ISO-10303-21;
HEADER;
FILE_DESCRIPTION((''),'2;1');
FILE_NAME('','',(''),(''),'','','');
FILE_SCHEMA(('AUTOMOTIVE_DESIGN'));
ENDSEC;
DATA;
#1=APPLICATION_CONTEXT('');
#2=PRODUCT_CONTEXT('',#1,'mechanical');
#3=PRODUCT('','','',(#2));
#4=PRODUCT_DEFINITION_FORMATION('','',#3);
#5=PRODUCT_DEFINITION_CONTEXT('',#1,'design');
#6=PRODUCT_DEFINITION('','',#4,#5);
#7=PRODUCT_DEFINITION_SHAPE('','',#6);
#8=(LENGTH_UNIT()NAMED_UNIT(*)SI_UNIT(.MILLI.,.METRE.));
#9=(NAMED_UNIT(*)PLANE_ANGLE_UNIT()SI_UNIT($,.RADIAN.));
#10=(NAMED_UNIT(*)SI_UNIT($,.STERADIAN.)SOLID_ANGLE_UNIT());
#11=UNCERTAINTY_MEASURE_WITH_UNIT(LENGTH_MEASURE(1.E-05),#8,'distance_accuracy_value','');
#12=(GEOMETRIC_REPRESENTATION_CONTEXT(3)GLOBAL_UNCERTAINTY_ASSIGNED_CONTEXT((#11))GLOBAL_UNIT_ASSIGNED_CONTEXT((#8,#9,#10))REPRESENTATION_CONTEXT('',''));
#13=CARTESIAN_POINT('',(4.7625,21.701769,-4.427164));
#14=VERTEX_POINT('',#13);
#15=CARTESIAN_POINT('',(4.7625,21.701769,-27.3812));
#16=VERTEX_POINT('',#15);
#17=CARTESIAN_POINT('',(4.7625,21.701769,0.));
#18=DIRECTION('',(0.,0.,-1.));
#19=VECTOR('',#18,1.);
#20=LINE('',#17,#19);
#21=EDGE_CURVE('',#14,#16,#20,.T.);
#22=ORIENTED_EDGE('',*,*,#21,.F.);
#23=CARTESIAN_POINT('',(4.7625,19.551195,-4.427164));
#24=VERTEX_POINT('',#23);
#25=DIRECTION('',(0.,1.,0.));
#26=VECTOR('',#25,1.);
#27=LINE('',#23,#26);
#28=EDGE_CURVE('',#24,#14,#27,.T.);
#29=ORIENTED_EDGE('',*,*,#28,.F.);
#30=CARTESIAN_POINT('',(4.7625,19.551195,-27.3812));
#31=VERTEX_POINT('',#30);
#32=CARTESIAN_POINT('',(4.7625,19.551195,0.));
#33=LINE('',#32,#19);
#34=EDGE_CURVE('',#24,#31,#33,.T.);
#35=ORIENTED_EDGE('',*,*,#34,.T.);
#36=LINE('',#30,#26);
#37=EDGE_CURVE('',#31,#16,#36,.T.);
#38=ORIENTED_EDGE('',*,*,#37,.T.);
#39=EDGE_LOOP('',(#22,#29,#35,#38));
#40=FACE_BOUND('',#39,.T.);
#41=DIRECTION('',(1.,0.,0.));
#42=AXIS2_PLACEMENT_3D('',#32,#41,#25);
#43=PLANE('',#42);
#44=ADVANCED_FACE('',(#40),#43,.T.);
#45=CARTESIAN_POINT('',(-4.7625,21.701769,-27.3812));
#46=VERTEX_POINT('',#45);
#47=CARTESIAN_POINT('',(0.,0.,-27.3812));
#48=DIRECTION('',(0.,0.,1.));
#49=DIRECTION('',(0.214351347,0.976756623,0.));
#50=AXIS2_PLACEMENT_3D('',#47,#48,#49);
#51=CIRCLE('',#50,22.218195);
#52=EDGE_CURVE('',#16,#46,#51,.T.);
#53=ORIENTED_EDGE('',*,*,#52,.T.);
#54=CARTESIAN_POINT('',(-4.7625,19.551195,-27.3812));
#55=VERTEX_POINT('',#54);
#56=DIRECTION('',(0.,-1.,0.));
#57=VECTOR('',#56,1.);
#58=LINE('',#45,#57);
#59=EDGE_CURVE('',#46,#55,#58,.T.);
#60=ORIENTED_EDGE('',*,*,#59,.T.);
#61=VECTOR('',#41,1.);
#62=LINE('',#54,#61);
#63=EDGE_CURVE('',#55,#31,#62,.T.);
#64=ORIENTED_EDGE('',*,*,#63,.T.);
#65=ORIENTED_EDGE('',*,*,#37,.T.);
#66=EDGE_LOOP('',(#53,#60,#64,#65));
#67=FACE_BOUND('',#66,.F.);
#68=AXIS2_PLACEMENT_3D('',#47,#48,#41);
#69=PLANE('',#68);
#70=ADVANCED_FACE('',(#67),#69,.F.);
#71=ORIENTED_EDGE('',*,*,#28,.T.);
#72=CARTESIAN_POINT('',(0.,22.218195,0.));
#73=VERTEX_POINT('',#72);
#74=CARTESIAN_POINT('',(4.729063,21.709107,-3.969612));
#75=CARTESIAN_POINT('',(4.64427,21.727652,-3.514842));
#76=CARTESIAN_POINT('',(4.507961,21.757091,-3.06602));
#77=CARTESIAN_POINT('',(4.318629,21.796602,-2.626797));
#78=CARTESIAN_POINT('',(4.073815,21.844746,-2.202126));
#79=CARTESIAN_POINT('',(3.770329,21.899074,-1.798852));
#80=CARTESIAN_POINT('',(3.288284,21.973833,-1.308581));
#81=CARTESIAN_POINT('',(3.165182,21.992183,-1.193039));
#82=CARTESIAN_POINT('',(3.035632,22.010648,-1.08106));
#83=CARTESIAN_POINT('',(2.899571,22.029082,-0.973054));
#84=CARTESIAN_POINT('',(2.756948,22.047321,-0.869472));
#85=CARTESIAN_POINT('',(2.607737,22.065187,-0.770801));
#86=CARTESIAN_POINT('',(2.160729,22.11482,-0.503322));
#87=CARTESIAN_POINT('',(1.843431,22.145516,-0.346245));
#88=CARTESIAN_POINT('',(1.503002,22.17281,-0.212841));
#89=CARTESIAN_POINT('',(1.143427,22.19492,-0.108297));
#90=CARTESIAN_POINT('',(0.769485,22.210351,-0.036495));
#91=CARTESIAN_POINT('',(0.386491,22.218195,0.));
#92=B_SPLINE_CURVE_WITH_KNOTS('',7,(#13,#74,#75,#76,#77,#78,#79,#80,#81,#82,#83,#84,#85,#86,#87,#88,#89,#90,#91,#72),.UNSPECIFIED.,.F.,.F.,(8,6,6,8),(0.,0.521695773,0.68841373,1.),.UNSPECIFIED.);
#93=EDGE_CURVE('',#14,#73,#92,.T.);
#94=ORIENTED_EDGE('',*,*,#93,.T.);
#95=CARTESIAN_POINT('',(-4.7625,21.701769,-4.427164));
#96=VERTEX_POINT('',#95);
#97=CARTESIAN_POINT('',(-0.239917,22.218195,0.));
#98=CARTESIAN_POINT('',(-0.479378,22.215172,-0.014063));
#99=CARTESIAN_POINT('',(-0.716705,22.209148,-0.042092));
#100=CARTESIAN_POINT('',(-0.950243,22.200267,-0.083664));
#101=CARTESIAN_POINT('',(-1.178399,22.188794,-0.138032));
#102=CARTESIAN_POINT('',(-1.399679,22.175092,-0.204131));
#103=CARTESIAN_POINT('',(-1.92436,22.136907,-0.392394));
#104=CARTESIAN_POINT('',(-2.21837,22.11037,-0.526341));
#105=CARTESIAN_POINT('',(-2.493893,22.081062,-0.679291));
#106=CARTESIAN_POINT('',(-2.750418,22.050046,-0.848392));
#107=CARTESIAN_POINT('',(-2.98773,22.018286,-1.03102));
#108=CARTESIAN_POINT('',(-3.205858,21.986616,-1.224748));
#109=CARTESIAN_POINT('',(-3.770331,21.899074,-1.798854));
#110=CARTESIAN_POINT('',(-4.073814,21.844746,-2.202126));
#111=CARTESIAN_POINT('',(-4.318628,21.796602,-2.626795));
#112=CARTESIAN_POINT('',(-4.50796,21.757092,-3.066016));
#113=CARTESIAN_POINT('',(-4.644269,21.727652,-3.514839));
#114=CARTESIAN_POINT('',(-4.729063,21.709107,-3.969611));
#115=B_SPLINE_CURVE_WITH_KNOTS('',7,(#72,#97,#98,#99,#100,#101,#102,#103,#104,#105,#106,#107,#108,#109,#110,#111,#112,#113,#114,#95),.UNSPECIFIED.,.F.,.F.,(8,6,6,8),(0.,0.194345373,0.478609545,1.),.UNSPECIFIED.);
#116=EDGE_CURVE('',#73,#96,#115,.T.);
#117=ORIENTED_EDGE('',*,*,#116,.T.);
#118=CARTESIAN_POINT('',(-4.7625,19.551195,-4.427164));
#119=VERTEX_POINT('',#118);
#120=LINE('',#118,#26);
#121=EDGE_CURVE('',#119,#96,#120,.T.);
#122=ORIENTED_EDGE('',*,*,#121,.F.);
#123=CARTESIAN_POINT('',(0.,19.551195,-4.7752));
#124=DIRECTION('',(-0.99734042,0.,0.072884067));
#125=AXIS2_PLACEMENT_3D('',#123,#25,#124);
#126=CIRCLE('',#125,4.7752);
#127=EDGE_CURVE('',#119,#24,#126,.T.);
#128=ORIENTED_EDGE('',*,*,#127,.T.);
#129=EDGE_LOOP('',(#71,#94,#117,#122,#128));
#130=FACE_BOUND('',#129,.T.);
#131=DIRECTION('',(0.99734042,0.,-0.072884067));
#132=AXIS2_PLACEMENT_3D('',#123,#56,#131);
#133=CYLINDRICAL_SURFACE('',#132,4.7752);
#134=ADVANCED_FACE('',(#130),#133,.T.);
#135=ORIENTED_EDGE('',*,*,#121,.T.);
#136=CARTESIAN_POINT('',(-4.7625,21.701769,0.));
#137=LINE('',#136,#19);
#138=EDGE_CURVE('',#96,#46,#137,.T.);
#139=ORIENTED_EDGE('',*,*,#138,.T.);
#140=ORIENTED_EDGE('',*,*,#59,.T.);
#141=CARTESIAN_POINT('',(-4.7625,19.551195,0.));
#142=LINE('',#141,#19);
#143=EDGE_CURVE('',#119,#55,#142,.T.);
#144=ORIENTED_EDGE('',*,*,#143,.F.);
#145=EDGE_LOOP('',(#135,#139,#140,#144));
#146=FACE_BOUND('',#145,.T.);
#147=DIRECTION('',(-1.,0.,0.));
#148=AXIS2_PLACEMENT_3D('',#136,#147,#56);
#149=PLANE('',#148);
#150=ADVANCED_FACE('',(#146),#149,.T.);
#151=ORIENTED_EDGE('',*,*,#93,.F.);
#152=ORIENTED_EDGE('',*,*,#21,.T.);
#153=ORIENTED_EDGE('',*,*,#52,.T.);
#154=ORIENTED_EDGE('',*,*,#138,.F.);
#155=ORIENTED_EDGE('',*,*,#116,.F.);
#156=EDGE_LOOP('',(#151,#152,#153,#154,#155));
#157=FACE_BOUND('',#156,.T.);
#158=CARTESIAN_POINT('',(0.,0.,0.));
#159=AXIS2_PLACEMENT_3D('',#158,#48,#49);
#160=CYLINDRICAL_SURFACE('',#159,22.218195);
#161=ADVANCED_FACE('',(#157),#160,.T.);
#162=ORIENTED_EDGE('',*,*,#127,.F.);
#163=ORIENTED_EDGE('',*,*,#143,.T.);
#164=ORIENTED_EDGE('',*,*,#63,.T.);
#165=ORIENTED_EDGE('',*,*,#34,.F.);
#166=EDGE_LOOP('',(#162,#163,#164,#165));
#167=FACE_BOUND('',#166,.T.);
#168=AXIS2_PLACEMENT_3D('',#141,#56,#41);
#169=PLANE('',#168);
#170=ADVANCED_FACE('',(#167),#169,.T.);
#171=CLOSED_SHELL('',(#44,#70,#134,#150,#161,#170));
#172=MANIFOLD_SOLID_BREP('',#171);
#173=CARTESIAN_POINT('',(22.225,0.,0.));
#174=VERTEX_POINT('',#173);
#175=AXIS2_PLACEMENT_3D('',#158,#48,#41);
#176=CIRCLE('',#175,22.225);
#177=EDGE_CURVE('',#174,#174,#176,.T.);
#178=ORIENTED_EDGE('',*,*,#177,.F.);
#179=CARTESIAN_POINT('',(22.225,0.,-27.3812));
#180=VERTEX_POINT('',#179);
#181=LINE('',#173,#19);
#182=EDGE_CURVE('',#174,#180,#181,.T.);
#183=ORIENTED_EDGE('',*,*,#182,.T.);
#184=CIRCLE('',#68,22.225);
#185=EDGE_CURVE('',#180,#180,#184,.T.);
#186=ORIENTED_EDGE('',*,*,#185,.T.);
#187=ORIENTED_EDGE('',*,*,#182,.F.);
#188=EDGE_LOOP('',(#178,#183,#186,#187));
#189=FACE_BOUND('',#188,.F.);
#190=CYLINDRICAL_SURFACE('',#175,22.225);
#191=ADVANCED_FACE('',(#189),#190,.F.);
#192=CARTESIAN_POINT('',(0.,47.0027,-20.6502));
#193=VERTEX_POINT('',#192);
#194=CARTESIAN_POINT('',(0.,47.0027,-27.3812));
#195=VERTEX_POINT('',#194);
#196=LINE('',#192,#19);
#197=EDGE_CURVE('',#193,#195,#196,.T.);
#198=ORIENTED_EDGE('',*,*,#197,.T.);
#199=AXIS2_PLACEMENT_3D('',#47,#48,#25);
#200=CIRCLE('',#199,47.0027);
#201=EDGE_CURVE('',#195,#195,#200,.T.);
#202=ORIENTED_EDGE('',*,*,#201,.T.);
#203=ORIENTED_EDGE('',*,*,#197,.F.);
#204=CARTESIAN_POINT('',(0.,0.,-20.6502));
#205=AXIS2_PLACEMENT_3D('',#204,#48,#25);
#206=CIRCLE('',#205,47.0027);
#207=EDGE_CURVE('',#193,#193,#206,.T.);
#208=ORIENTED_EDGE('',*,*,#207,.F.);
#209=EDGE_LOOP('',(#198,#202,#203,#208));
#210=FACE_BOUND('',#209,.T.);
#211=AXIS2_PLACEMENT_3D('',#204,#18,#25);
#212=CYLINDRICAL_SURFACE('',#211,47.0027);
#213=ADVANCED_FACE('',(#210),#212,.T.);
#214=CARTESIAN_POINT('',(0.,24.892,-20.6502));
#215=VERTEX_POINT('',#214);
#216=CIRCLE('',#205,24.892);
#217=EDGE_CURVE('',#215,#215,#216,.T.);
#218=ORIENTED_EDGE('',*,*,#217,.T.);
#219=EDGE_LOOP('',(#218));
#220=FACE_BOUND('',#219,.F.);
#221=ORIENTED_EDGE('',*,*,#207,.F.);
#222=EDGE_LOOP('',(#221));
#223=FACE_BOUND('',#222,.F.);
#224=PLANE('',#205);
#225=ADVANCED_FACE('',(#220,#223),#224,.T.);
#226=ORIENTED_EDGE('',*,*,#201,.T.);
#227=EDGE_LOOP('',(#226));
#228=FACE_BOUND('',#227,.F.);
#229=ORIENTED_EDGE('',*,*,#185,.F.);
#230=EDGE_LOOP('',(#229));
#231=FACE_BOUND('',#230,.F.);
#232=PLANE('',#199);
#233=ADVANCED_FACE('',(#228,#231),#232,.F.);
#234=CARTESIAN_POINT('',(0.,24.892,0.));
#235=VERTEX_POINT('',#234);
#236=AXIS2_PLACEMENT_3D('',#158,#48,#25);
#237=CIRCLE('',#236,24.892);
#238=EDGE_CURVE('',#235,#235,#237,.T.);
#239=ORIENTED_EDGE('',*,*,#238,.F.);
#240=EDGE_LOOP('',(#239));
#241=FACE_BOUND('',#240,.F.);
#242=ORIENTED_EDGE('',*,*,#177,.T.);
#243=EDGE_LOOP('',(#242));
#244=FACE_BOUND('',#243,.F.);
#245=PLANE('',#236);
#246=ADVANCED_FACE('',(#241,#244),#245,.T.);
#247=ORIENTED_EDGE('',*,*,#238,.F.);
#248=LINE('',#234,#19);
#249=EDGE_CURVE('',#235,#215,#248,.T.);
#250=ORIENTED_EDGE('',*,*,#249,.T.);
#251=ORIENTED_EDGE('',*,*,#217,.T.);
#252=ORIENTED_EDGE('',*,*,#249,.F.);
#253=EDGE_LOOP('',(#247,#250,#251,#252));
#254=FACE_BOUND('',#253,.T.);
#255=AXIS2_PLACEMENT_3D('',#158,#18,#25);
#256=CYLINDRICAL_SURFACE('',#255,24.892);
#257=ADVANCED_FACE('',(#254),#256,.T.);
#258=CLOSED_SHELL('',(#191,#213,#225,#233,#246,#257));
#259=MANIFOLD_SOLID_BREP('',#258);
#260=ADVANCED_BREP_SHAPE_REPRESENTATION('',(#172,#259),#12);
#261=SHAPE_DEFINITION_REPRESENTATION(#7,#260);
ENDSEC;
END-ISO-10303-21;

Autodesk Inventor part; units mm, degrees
ref_plane "YZ Plane" through (0, 0, 0) normal (1, 0, 0) x (0, 1, 0)
ref_plane "XZ Plane" through (0, 0, 0) normal (0, 1, 0) x (-1, 0, 0)
ref_plane "XY Plane" through (0, 0, 0) normal (0, 0, 1) x (1, 0, 0)
sketch "Sketch1" plane through (0, 0, 0) normal (1, 0, 0) x (0, 1, 0)
  line L0 (0, 0) -> (24.892, 0)
  line L1 (24.892, 0) -> (24.892, -20.6502)
  line L2 (24.892, -20.6502) -> (47.0027, -20.6502)
  line L3 (47.0027, -20.6502) -> (47.0027, -27.3812)
  line L4 (47.0027, -27.3812) -> (0, -27.3812)
  line L5 (0, -27.3812) -> (0, 0)
  dimension "d1" = 24.892
  dimension "d2" = 20.6502
  dimension "d3" = 22.1107
  dimension "d4" = 6.731
revolve "Revolution1" add sketch "Sketch1" angle 360 about axis through (0, 0, -27.3812) along (0, 0, 1)
sketch "Sketch2" plane through (0, 0, 0) normal (0, 0, 1) x (1, 0, 0)
  circle A0 centre (0, 0) radius 22.225
  dimension "d6" = 44.45
extrude "Extrusion1" cut sketch "Sketch2" against normal blind 28.575
sketch "Sketch3" plane through (0, 0, 0) normal (0, 0, 1) x (1, 0, 0)
  circle A0 centre (0, 0) radius 22.225
  line L0 (-4.7625, 21.708736) -> (-4.7625, 19.551195)
  line L1 (-4.7625, 19.551195) -> (4.7625, 19.551195)
  line L2 (4.7625, 19.551195) -> (4.7625, 21.708736)
  arc A1 (4.7625, 21.701769) -> (-4.7625, 21.701769) centre (0, 0) ccw
  line L3 (0, 0) -> (0, 24.892)
  circle A2 centre (0, 0) radius 24.892
  point P0 (0, 22.218195)
  dimension "d10" = 9.525
  dimension "d12" = 2.667
sketch "Sketch3 outline for Extrusion2" plane through (0, 0, 0) normal (0, 0, 1) x (1, 0, 0)
  arc A0 (4.7625, 21.701769) -> (-4.7625, 21.701769) centre (0, 0) ccw
  line L0 (4.7625, 19.551195) -> (4.7625, 21.701769)
  line L1 (-4.7625, 19.551195) -> (4.7625, 19.551195)
  line L2 (-4.7625, 21.701769) -> (-4.7625, 19.551195)
extrude "Extrusion2" add sketch "Sketch3 outline for Extrusion2" against normal up to surface (27.3812 mm away)
sketch "Sketch4" plane through (-4.7625, 19.551195, 0) normal (0, -1, 0) x (1, 0, 0)
  line L0 (4.7625, 0) -> (4.7625, -4.7752)
  arc A0 (9.525, -5.123236) -> (0, -5.123236) centre (4.7625, -4.7752) ccw
  line L1 (9.525, 0) -> (0, 0)
  line L2 (4.7625, 0) -> (0, 0)
  line L3 (0, 0) -> (0, -4.427164)
  line L4 (0, 0) -> (0, -27.3812)
  line L5 (4.7625, 0) -> (9.5377, 0)
  line L6 (9.5377, 0) -> (9.525, -4.427164)
  line L7 (9.525, 0) -> (9.525, -27.3812)
  dimension "d15" = 4.7752
extrude "Extrusion3" cut sketch "Sketch4" against normal up to surface contours A0 L3 L1 | A0 L1 L7
properties part number "MotorFlexHub"
